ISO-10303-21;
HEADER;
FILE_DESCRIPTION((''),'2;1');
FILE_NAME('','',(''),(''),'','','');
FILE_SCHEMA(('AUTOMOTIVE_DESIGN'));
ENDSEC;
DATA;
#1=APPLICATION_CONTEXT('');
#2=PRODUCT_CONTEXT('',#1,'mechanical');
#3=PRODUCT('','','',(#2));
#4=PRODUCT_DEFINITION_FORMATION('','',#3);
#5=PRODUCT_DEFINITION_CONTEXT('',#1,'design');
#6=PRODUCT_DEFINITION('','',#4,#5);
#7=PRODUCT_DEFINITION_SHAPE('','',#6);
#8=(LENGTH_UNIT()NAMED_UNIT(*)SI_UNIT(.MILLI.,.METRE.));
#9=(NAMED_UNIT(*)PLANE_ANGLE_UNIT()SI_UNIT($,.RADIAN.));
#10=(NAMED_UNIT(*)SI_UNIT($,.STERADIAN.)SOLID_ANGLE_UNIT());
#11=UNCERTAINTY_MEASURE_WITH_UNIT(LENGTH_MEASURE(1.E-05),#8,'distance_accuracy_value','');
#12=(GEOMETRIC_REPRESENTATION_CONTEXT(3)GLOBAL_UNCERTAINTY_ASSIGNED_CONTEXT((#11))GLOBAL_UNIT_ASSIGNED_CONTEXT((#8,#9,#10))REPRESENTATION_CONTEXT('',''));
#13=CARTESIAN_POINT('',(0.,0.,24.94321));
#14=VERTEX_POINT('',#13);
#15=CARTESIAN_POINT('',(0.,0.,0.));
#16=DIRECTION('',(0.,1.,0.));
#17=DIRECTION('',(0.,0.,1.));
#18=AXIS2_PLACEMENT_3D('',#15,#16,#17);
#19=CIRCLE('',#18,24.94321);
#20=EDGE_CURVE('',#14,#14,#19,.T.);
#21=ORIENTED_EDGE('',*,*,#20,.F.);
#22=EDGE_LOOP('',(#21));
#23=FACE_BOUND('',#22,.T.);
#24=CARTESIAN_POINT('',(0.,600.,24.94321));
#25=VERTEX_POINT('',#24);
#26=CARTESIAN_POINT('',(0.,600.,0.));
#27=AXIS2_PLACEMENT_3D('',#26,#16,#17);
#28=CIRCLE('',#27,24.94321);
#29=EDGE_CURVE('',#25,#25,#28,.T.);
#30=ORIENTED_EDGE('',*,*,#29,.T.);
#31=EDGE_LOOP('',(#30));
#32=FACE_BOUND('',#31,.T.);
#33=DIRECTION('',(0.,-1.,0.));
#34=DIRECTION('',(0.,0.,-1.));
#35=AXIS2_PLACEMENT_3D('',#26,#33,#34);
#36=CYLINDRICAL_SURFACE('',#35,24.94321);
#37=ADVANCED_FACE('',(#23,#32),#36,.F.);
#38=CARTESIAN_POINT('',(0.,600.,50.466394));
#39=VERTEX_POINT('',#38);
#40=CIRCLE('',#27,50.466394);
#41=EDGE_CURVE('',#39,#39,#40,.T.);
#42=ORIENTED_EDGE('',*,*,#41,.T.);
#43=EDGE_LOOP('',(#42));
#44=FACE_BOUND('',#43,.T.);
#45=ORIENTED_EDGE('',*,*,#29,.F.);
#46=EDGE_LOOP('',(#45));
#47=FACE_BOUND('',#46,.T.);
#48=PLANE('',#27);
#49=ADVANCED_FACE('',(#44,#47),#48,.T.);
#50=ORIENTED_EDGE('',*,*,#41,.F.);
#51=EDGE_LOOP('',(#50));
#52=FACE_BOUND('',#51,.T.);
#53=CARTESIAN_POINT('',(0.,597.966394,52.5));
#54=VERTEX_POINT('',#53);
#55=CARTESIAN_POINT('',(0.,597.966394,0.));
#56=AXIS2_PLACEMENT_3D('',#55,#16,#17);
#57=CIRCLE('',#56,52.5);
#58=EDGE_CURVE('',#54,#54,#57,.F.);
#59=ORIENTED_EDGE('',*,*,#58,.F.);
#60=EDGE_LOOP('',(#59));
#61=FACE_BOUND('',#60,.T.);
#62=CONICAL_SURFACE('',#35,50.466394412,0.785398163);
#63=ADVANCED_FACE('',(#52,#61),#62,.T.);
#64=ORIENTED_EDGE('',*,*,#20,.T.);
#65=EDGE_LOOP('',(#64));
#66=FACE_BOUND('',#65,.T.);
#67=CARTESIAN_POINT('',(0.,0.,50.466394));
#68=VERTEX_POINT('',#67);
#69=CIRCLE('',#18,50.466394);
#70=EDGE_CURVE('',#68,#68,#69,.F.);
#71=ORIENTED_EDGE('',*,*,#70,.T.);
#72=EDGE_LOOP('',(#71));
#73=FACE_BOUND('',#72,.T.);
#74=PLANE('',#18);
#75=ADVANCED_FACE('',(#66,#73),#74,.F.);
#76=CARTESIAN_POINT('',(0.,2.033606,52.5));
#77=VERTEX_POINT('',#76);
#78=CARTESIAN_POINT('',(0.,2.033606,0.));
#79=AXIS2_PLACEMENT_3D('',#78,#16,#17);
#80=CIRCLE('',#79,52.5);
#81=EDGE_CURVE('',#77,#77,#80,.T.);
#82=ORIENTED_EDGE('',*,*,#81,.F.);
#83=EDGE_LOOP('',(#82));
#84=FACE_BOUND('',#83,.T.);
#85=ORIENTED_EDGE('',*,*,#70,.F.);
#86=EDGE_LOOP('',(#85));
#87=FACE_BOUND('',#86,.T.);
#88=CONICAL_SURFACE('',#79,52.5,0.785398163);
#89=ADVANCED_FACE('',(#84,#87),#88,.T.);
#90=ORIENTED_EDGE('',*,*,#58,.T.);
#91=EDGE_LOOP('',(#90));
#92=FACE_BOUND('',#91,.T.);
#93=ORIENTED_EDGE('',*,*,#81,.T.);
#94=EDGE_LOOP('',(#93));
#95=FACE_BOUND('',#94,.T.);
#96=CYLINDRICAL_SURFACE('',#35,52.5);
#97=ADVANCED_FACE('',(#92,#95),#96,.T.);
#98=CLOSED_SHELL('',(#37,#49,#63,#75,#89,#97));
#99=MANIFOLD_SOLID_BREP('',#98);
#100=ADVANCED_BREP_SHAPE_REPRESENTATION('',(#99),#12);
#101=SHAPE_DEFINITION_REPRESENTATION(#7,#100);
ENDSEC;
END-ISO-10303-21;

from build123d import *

# Parameters (mm, degrees)
SKETCH1_R           = 52.5
BOSS_EXTRUDE1_DEPTH = 600
SKETCH2_R           = 24.943209722
CUT_EXTRUDE1_DEPTH  = 605.576297914
CHAMFER1_SIZE       = 2.033605588


with BuildPart() as part:
    # Sketch1 → Boss-Extrude1 (new body)
    with BuildSketch(Plane(origin=(0, 0, 0), x_dir=(1, 0, 0), z_dir=(0, 1, 0))):
        Circle(SKETCH1_R)
    extrude(amount=BOSS_EXTRUDE1_DEPTH)

    # Sketch2 → Cut-Extrude1 (cut, through all)
    with BuildSketch(Plane(origin=(0, 0, 0), x_dir=(1, 0, 0), z_dir=(0, 1, 0))):
        Circle(SKETCH2_R)
    extrude(amount=CUT_EXTRUDE1_DEPTH, mode=Mode.SUBTRACT)

    # Chamfer1
    chamfer1_edges = [part.edges().sort_by_distance(p)[0] for p in [
        (-52.5, 600, 0),
        (-52.5, 0, 0),
    ]]
    chamfer(chamfer1_edges, length=CHAMFER1_SIZE)


solid = part.part
